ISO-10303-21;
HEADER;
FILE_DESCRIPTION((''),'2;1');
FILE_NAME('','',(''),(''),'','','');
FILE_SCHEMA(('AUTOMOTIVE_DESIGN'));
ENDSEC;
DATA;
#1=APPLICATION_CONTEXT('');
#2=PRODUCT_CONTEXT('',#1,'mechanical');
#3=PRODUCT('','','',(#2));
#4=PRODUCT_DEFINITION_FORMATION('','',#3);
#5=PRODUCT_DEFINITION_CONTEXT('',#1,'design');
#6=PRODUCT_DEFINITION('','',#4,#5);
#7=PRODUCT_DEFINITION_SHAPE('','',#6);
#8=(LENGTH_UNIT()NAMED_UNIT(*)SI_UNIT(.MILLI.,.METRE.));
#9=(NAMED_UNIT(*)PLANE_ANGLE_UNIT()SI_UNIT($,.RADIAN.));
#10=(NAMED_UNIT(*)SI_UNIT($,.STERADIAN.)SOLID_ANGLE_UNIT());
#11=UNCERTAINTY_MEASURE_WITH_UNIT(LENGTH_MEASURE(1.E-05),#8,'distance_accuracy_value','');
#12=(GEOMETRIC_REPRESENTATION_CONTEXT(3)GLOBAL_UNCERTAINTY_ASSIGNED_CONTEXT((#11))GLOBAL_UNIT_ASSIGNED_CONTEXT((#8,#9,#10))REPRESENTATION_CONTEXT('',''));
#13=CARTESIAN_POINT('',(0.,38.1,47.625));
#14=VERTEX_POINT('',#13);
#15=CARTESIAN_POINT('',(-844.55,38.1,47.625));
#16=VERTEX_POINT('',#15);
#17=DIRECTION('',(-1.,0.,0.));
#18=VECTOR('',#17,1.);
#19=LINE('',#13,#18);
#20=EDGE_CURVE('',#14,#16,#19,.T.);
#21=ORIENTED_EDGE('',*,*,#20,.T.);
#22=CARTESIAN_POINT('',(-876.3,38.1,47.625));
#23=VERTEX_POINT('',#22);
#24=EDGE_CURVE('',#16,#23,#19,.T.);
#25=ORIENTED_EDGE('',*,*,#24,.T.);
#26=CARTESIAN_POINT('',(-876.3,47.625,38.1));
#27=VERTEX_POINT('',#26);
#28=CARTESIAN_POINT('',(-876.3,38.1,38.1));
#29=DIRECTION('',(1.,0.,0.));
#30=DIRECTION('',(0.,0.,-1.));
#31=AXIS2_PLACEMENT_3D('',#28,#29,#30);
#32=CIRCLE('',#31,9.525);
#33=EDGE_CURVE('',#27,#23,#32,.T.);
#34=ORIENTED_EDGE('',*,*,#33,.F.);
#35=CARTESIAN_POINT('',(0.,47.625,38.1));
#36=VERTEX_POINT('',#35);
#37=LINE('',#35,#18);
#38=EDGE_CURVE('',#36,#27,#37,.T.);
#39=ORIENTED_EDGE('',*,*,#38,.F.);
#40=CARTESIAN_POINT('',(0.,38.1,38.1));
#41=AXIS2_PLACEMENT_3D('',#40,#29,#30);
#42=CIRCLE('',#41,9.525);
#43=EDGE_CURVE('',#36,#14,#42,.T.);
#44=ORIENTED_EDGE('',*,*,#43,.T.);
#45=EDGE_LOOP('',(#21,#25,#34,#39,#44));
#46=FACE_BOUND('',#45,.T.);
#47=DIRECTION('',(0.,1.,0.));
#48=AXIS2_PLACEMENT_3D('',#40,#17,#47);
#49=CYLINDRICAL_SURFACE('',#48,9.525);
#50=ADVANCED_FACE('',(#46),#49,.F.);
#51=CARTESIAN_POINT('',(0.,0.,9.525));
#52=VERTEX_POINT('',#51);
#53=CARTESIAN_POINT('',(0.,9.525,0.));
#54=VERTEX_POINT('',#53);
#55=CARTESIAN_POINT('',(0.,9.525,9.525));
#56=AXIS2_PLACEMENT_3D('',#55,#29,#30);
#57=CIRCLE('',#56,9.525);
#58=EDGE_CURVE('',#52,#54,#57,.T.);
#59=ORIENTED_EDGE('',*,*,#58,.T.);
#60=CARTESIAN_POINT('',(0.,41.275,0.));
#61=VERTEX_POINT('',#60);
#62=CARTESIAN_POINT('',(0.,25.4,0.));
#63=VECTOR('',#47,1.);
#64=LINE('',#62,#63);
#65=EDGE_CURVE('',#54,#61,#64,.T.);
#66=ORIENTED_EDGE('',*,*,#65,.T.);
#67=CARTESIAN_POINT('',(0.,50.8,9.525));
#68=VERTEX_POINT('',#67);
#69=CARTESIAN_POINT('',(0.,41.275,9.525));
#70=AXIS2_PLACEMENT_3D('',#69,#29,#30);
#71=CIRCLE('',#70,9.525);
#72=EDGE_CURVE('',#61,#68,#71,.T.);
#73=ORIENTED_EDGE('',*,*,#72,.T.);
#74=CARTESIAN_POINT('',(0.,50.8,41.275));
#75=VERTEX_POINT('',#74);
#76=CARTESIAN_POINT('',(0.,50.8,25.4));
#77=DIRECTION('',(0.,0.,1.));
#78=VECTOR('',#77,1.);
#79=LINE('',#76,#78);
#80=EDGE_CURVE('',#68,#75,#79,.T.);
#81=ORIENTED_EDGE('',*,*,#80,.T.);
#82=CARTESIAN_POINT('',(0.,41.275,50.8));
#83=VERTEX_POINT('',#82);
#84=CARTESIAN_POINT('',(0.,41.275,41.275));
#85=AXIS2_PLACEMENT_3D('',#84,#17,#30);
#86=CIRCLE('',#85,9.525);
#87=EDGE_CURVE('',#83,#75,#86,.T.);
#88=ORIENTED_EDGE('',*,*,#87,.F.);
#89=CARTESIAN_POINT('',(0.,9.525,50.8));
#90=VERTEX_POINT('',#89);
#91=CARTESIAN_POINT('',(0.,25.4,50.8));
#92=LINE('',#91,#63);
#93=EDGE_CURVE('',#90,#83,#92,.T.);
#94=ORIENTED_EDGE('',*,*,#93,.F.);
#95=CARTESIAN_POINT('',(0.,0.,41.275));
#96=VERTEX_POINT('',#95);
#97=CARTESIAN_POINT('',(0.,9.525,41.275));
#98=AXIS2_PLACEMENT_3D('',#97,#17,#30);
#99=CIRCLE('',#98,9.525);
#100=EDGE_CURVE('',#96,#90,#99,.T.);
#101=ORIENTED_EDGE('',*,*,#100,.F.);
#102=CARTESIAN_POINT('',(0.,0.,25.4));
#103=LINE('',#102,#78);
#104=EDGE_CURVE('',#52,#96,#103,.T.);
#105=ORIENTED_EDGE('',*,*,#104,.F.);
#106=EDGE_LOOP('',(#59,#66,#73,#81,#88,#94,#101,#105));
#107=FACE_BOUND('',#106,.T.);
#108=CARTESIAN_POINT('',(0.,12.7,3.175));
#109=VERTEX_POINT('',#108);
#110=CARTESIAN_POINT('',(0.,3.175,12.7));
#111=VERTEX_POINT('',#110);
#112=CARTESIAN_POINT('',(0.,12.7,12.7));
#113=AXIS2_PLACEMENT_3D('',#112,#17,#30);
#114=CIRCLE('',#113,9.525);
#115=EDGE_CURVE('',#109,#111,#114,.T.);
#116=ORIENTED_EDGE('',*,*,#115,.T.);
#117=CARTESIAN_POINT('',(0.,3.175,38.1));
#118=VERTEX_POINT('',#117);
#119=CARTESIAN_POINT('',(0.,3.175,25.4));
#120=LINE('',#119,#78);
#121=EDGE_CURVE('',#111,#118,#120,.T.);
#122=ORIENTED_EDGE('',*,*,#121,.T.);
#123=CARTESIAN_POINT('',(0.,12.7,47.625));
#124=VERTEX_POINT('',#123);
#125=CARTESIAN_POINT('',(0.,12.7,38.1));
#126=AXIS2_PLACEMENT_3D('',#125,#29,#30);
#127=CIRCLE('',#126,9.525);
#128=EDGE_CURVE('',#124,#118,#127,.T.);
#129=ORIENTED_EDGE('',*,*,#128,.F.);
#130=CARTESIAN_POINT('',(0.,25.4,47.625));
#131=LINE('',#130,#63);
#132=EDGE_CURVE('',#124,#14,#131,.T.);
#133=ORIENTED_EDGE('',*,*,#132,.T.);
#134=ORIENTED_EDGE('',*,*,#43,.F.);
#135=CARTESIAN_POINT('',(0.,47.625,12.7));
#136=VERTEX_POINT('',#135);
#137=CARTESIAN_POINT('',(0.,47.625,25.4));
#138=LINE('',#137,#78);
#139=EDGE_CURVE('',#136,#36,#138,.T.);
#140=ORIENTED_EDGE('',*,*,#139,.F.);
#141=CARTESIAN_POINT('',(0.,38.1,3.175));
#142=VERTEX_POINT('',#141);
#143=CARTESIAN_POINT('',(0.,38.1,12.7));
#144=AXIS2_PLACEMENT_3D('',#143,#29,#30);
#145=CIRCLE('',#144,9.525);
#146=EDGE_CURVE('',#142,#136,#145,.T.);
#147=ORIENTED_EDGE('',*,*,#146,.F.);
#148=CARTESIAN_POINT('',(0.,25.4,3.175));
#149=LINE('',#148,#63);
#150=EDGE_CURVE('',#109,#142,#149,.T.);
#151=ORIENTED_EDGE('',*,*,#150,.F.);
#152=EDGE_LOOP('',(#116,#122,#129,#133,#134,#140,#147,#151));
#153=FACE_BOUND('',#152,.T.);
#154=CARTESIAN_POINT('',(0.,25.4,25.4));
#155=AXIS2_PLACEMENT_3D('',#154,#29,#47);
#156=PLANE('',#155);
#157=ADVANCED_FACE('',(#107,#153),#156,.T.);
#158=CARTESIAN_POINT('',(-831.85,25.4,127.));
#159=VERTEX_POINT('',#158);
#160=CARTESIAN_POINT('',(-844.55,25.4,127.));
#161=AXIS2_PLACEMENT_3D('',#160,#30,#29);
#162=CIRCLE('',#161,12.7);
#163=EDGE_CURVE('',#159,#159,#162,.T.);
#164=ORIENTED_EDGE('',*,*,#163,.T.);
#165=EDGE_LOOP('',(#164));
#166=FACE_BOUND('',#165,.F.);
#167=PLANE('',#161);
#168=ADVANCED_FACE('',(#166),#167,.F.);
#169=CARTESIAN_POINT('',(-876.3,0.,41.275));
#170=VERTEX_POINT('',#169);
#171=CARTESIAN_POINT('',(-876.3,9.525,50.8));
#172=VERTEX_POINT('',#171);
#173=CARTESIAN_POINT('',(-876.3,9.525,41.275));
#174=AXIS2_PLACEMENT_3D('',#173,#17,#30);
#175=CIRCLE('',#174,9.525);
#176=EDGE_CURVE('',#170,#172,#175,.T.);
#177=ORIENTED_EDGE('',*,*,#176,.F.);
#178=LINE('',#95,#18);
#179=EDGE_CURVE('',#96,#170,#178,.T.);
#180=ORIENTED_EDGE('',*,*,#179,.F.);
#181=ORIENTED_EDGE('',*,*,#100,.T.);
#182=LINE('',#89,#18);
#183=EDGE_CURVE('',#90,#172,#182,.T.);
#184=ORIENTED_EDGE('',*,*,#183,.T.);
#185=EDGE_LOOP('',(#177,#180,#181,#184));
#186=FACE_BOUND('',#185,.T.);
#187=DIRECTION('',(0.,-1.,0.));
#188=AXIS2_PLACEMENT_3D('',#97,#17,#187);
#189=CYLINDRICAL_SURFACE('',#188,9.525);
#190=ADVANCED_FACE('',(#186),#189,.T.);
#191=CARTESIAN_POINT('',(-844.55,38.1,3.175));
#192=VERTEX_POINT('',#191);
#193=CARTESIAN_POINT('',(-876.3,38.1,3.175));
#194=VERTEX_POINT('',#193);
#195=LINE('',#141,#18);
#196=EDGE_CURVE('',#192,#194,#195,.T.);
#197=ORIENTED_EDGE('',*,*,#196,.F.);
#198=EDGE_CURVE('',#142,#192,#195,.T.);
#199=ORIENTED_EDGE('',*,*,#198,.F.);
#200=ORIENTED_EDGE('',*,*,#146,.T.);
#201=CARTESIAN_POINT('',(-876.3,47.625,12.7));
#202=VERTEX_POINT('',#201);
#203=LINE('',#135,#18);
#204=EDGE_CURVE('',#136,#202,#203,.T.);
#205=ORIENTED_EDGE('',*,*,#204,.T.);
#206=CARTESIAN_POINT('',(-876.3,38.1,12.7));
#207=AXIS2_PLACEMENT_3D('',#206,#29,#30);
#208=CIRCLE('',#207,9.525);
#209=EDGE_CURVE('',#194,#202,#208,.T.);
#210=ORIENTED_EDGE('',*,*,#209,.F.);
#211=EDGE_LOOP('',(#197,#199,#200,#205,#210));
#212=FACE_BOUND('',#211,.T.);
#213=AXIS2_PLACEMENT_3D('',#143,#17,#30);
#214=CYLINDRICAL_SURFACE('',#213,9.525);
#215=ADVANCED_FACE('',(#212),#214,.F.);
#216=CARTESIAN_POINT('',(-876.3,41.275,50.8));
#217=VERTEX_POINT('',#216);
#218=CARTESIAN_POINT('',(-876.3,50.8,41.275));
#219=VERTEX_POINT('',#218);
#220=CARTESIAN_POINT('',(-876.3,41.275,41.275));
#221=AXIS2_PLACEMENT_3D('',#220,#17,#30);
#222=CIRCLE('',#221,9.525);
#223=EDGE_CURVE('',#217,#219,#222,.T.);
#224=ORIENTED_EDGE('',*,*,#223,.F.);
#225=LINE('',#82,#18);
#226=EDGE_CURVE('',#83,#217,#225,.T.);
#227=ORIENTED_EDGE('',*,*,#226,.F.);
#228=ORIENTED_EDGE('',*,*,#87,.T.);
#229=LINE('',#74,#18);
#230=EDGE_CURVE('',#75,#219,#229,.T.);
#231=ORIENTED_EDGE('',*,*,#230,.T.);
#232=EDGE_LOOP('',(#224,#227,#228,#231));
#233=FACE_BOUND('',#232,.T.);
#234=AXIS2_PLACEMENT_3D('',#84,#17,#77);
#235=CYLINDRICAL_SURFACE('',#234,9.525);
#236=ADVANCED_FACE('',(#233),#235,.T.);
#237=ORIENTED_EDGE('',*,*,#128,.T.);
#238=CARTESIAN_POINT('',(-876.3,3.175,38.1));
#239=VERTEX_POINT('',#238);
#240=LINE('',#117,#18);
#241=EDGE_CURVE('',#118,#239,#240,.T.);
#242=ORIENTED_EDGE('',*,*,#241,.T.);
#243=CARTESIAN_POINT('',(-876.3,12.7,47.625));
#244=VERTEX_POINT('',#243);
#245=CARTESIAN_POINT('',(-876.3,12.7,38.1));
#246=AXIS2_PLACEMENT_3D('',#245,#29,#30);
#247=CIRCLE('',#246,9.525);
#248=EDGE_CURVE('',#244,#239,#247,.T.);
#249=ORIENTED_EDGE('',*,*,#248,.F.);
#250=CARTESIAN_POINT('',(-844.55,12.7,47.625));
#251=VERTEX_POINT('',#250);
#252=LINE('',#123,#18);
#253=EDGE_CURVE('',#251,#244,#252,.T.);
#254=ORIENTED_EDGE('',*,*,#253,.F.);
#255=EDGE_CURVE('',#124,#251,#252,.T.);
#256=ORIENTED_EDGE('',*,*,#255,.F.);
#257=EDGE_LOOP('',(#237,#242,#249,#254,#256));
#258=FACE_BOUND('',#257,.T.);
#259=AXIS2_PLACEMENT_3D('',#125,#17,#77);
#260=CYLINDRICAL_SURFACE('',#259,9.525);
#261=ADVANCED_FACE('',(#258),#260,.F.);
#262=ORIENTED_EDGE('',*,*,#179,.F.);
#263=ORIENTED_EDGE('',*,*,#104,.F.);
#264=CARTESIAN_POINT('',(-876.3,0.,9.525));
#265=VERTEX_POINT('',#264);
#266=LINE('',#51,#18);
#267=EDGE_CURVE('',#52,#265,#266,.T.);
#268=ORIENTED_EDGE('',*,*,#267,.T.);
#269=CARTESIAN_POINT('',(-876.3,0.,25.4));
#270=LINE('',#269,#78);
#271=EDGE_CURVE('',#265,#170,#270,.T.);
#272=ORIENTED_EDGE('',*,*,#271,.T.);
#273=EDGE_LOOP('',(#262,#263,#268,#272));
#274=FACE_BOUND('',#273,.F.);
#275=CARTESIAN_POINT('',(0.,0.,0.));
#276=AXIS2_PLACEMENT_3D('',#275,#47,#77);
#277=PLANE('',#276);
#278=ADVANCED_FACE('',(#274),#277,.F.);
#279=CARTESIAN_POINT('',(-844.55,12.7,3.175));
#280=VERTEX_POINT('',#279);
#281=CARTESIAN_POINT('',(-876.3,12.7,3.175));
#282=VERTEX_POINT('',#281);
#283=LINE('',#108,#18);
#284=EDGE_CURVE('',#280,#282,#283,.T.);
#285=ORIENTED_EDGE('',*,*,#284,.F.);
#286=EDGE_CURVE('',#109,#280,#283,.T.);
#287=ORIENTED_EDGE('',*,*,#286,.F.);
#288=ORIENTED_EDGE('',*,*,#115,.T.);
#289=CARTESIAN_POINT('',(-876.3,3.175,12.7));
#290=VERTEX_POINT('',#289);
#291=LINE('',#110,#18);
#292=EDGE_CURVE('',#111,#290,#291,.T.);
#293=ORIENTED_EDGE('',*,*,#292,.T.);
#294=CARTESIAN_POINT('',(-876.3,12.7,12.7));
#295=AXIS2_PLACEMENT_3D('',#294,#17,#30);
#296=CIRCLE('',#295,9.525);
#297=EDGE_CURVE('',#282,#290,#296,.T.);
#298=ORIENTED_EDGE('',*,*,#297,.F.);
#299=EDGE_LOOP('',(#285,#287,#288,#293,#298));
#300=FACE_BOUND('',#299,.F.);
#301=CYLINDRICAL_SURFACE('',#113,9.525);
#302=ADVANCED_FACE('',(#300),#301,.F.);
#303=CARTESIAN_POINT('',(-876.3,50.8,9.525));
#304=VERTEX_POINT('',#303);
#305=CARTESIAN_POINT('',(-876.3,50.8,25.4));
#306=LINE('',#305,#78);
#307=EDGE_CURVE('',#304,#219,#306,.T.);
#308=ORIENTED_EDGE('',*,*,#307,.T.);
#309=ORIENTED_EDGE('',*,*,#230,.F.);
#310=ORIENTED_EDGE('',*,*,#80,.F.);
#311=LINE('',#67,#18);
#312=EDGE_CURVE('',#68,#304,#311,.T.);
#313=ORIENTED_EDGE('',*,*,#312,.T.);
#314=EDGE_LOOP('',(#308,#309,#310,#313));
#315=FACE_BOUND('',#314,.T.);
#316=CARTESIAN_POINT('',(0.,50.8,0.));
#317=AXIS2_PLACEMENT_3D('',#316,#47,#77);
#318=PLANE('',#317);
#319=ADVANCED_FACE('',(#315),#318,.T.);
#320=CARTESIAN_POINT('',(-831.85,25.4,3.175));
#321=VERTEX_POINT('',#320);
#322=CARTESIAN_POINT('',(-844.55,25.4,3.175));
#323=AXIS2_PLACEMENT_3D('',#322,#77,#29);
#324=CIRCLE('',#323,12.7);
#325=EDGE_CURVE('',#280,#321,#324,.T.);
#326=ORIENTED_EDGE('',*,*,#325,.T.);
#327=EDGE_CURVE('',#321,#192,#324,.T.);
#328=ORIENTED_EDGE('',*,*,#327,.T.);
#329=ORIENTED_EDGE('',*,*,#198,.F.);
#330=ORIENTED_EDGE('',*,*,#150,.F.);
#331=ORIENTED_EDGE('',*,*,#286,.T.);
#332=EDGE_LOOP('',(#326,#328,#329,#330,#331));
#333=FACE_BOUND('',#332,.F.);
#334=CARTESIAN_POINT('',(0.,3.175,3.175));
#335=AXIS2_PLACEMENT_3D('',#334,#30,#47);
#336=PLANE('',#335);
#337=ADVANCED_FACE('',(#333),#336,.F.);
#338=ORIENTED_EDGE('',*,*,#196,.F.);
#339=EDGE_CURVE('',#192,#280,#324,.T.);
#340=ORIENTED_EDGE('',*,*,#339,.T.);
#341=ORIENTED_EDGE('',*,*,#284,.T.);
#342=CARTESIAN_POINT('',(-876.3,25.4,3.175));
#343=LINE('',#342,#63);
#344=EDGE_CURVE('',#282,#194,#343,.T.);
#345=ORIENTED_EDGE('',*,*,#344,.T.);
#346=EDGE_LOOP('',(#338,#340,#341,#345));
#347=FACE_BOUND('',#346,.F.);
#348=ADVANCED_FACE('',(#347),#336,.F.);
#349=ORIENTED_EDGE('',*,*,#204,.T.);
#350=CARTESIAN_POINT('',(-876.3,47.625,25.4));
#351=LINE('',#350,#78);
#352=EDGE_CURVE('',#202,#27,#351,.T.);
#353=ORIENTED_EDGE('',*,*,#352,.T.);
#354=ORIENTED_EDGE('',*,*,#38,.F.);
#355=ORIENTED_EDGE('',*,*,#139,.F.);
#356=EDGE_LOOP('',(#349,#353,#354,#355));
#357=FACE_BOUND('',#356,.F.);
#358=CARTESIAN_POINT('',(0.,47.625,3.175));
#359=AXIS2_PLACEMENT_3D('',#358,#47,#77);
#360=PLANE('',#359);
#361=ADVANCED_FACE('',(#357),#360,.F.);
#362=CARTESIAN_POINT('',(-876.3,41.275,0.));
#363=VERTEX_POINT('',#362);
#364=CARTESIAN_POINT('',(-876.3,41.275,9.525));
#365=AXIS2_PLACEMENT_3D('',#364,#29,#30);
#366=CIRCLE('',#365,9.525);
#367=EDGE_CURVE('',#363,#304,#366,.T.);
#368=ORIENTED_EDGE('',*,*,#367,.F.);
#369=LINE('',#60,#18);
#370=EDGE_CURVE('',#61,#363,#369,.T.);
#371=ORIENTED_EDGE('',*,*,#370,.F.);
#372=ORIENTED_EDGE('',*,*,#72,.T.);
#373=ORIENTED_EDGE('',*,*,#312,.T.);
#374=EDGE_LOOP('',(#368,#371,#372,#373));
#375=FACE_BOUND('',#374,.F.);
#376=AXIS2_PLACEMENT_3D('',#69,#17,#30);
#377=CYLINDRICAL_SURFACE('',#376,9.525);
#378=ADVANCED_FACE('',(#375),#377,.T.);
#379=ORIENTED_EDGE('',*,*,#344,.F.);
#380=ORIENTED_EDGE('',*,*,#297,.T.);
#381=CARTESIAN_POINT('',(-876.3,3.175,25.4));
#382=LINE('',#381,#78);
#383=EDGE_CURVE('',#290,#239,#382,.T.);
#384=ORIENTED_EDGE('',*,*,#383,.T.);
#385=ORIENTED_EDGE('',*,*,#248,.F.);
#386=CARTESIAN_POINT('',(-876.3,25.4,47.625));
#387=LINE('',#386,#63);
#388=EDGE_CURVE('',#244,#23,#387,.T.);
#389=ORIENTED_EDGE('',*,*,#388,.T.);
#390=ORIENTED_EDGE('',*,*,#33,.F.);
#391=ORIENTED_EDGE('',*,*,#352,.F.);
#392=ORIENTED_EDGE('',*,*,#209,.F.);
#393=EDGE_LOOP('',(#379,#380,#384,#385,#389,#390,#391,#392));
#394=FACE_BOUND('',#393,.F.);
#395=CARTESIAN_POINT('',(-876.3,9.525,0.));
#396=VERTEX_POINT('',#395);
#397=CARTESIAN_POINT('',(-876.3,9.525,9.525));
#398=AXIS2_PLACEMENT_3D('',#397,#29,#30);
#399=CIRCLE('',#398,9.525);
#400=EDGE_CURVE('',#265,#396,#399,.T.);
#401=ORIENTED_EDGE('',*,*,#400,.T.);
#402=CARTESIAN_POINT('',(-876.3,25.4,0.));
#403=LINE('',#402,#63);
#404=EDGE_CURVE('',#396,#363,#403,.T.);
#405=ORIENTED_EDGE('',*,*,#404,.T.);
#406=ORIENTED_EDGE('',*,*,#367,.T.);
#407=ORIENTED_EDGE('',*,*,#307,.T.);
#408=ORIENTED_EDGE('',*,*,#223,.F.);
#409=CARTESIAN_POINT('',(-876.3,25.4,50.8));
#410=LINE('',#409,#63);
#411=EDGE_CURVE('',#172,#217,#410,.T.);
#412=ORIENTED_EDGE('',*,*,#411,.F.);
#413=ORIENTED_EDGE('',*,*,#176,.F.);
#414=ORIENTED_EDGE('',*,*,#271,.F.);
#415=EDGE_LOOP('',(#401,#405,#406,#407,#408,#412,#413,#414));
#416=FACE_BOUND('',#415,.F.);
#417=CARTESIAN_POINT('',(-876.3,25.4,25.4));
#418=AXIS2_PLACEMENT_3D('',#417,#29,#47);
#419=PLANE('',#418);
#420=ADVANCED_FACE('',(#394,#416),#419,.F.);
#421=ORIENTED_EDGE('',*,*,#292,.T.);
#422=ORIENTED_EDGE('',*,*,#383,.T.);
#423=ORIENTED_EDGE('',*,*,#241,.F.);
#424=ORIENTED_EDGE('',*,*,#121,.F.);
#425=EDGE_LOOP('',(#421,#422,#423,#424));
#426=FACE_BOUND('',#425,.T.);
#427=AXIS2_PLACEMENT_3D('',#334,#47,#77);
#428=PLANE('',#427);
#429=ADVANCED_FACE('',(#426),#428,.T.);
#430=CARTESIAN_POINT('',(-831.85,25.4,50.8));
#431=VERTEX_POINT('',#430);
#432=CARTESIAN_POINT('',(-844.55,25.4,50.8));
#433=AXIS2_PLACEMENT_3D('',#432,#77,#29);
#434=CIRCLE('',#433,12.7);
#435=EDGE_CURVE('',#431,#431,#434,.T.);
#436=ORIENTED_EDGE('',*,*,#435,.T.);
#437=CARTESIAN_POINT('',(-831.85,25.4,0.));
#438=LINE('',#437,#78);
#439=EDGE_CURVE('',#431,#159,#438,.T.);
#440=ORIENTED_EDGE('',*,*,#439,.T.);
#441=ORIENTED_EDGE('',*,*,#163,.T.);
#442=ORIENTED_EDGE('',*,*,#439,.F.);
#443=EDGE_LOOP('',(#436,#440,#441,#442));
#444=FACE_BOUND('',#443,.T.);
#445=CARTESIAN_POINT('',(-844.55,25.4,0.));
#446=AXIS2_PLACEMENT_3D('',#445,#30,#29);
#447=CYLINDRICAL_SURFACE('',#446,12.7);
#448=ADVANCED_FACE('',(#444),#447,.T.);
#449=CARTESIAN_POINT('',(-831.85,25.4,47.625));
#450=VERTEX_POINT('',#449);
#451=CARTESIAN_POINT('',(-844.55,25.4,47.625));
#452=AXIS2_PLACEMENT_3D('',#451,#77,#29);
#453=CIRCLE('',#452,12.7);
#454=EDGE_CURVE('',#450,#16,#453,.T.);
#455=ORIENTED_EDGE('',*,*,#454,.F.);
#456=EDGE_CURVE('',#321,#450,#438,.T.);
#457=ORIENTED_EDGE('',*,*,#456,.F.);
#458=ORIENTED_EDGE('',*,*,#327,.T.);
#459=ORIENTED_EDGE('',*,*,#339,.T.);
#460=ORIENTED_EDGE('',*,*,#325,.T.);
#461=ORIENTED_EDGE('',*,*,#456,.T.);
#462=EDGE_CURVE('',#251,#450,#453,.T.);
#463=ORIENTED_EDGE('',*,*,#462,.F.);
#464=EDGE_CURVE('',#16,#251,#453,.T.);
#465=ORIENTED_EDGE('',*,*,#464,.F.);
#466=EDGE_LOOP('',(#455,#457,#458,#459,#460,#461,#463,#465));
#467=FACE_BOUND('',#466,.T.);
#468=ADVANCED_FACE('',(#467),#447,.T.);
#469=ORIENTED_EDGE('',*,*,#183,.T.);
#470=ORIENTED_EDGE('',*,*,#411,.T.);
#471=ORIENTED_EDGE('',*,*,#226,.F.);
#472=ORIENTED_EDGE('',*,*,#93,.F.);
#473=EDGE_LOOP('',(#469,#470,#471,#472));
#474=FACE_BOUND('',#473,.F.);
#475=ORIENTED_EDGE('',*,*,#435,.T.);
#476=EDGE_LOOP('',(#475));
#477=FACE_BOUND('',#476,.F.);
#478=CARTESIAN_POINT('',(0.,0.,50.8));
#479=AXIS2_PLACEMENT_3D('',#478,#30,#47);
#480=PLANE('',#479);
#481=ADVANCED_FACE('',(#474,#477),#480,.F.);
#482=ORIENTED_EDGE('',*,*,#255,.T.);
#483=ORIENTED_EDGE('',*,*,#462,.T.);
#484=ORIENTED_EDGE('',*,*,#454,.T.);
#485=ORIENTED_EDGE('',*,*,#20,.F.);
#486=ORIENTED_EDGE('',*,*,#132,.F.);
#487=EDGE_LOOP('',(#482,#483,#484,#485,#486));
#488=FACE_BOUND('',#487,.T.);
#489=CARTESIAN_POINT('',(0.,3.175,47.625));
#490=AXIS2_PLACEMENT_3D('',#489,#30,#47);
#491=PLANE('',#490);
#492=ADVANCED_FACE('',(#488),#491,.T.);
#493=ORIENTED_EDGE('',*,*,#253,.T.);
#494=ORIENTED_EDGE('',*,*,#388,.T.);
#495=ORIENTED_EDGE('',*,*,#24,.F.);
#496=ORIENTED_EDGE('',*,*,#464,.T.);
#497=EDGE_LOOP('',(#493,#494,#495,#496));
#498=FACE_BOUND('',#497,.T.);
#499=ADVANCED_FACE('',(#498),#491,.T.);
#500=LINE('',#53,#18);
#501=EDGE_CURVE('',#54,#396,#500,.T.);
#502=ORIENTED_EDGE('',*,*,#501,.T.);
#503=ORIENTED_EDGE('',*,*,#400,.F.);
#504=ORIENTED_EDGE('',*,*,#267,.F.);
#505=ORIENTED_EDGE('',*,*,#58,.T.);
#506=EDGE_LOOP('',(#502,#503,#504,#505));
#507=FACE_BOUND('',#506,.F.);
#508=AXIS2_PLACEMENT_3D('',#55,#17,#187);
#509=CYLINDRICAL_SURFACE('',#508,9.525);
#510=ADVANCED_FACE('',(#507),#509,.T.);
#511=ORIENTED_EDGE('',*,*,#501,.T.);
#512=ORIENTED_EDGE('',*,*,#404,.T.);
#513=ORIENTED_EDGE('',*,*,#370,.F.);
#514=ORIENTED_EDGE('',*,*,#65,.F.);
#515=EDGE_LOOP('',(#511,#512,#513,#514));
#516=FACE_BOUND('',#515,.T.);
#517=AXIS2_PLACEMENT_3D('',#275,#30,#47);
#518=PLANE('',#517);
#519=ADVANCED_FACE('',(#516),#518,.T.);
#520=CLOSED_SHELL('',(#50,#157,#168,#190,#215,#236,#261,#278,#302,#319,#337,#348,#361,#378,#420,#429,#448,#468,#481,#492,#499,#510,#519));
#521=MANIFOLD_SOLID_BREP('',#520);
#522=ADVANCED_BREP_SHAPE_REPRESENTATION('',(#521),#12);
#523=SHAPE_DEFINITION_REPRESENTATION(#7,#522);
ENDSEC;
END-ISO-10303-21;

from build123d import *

# Parameters (mm, degrees)
F0_W     = 50.8
F0_H     = 50.8
F1_DEPTH = 876.3
F2_W     = 44.45
F2_H     = 44.45
F3_DEPTH = 876.3
F4_R     = 9.525
F5_R     = 12.7
F6_DEPTH = 50.8
F7_R     = 12.7
F8_DEPTH = 127


with BuildPart() as f1:
    # F0 (on Right) → F1 (new body)
    with BuildSketch(Plane.YZ):
        with Locations((25.4, 25.4)):
            Rectangle(F0_W, F0_H)
    extrude(amount=-F1_DEPTH)

    # F2 (on face) → F3 (cut)
    with BuildSketch(Plane.YZ):
        with Locations((25.4, 25.4)):
            Rectangle(F2_W, F2_H)
    extrude(amount=-F3_DEPTH, mode=Mode.SUBTRACT)

    # F4
    f4_edges = [f1.edges().sort_by_distance(p)[0] for p in [
        (-438.15, 3.175, 3.175),
        (-438.15, 47.625, 3.175),
        (-438.15, 47.625, 47.625),
        (-438.15, 3.175, 47.625),
        (-438.15, 50.8, 0),
        (-438.15, 50.8, 50.8),
        (-438.15, 0, 50.8),
        (-438.15, 0, 0),
    ]]
    fillet(f4_edges, radius=F4_R)

    # F5 (on face) → F6 (cut)
    with BuildSketch(Plane.XY.offset(50.8)):
        with Locations((-844.55, 25.4)):
            Circle(F5_R)
    extrude(amount=-F6_DEPTH, mode=Mode.SUBTRACT)

    # F7 (on face) → F8 (join)
    with BuildSketch(Plane(origin=(0, 0, 0), x_dir=(1, 0, 0), z_dir=(0, 0, -1))):
        with Locations((-844.55, -25.4)):
            Circle(F7_R)
    extrude(amount=-F8_DEPTH)


solid = f1.part
